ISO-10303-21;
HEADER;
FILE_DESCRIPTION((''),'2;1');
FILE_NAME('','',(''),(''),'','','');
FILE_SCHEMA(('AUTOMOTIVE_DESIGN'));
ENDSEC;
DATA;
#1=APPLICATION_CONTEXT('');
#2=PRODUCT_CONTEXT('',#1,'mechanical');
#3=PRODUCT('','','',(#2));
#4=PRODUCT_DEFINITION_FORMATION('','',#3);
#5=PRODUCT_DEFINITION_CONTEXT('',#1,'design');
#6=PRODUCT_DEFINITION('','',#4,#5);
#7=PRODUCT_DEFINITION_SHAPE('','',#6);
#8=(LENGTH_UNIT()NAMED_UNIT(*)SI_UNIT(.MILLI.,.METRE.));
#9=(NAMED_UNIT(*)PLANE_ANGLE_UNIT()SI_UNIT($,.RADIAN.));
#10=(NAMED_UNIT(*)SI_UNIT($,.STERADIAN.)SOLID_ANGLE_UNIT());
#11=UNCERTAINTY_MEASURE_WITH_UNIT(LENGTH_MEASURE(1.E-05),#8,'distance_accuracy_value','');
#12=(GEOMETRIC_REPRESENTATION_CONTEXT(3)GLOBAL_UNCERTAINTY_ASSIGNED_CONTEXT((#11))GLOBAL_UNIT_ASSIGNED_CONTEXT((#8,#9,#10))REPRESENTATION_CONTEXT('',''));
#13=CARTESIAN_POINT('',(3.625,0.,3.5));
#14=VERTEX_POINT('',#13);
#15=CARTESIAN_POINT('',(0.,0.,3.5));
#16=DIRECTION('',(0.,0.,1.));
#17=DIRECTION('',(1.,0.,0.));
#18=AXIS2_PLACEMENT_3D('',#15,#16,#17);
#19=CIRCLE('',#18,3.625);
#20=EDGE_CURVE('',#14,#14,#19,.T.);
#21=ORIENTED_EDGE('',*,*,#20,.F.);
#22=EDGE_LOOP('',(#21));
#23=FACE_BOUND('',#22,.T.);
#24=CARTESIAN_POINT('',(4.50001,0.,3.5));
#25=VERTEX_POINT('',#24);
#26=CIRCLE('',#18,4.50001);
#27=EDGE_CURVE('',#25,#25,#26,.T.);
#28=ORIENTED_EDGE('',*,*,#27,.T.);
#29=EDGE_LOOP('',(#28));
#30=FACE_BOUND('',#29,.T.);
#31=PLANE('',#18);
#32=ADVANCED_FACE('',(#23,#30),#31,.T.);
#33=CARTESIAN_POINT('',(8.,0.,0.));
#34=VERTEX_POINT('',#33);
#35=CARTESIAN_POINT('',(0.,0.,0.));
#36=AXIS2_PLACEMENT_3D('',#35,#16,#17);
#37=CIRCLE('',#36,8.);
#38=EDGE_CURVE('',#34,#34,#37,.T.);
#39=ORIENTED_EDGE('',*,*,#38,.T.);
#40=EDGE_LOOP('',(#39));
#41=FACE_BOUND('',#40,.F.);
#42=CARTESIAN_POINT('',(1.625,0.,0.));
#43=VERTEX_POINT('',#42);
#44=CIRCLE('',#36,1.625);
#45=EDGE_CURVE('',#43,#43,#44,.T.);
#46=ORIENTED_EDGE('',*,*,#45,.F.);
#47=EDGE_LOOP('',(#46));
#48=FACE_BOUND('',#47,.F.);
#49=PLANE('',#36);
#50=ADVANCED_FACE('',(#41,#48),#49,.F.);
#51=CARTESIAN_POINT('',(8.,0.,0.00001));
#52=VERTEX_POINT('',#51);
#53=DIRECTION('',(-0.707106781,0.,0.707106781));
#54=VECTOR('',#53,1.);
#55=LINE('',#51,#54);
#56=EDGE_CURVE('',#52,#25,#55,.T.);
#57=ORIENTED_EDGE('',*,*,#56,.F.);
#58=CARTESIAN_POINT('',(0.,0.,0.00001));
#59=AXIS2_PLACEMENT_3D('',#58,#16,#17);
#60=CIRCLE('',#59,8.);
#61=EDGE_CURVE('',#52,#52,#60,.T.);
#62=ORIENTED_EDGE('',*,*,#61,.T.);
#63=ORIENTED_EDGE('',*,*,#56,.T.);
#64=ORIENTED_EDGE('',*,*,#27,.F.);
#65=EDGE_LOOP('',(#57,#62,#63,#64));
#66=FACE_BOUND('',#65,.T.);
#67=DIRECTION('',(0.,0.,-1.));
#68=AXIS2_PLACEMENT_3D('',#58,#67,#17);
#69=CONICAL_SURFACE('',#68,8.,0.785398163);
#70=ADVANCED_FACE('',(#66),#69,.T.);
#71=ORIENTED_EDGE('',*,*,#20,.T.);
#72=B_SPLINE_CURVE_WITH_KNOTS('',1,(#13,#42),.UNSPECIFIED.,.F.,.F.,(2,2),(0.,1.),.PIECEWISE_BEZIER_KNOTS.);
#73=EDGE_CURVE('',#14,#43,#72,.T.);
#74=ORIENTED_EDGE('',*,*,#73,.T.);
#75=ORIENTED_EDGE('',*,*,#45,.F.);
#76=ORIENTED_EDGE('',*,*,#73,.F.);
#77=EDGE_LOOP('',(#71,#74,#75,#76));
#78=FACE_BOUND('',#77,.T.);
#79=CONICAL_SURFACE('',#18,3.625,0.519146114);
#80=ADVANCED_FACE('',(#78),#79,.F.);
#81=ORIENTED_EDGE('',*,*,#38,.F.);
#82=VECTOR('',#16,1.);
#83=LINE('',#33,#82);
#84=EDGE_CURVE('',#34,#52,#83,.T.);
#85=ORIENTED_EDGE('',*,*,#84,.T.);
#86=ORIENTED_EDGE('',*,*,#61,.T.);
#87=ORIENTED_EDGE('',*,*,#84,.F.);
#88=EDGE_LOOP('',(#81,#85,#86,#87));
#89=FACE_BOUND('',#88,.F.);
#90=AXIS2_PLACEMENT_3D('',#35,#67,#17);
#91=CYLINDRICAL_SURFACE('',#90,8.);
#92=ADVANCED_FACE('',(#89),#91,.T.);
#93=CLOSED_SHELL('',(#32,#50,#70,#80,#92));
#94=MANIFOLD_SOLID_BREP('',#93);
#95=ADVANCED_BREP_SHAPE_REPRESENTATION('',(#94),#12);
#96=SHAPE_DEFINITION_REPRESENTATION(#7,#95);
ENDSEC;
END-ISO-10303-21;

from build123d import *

# Parameters (mm, degrees)
F0_R     = 8
F1_DEPTH = 3.5
F2_SIZE  = 3.49999
F3_R     = 3.625
F4_R     = 1.625


# Not quite as in the source:
# - a fillet or chamfer is up to 0.001 mm smaller than in the source, because OpenCascade refuses the exact size


with BuildPart() as f1:
    # F0 (on Top) → F1 (new body)
    with BuildSketch(Plane.XY):
        Circle(F0_R)
    extrude(amount=F1_DEPTH)

    # F2 (size 3.5 in the source; OpenCascade refuses exactly that, so slightly less here)
    f2_edges = [f1.edges().sort_by_distance(p)[0] for p in [
        (-8, 0, 3.5),
    ]]
    chamfer(f2_edges, length=F2_SIZE)

    # F3 (on face) → F5 section 0
    with BuildSketch(Plane.XY.offset(3.5)):
        Circle(F3_R)
    # F4 (on Top) → F5 section 1
    with BuildSketch(Plane.XY):
        Circle(F4_R)
    loft(mode=Mode.SUBTRACT)


solid = f1.part
